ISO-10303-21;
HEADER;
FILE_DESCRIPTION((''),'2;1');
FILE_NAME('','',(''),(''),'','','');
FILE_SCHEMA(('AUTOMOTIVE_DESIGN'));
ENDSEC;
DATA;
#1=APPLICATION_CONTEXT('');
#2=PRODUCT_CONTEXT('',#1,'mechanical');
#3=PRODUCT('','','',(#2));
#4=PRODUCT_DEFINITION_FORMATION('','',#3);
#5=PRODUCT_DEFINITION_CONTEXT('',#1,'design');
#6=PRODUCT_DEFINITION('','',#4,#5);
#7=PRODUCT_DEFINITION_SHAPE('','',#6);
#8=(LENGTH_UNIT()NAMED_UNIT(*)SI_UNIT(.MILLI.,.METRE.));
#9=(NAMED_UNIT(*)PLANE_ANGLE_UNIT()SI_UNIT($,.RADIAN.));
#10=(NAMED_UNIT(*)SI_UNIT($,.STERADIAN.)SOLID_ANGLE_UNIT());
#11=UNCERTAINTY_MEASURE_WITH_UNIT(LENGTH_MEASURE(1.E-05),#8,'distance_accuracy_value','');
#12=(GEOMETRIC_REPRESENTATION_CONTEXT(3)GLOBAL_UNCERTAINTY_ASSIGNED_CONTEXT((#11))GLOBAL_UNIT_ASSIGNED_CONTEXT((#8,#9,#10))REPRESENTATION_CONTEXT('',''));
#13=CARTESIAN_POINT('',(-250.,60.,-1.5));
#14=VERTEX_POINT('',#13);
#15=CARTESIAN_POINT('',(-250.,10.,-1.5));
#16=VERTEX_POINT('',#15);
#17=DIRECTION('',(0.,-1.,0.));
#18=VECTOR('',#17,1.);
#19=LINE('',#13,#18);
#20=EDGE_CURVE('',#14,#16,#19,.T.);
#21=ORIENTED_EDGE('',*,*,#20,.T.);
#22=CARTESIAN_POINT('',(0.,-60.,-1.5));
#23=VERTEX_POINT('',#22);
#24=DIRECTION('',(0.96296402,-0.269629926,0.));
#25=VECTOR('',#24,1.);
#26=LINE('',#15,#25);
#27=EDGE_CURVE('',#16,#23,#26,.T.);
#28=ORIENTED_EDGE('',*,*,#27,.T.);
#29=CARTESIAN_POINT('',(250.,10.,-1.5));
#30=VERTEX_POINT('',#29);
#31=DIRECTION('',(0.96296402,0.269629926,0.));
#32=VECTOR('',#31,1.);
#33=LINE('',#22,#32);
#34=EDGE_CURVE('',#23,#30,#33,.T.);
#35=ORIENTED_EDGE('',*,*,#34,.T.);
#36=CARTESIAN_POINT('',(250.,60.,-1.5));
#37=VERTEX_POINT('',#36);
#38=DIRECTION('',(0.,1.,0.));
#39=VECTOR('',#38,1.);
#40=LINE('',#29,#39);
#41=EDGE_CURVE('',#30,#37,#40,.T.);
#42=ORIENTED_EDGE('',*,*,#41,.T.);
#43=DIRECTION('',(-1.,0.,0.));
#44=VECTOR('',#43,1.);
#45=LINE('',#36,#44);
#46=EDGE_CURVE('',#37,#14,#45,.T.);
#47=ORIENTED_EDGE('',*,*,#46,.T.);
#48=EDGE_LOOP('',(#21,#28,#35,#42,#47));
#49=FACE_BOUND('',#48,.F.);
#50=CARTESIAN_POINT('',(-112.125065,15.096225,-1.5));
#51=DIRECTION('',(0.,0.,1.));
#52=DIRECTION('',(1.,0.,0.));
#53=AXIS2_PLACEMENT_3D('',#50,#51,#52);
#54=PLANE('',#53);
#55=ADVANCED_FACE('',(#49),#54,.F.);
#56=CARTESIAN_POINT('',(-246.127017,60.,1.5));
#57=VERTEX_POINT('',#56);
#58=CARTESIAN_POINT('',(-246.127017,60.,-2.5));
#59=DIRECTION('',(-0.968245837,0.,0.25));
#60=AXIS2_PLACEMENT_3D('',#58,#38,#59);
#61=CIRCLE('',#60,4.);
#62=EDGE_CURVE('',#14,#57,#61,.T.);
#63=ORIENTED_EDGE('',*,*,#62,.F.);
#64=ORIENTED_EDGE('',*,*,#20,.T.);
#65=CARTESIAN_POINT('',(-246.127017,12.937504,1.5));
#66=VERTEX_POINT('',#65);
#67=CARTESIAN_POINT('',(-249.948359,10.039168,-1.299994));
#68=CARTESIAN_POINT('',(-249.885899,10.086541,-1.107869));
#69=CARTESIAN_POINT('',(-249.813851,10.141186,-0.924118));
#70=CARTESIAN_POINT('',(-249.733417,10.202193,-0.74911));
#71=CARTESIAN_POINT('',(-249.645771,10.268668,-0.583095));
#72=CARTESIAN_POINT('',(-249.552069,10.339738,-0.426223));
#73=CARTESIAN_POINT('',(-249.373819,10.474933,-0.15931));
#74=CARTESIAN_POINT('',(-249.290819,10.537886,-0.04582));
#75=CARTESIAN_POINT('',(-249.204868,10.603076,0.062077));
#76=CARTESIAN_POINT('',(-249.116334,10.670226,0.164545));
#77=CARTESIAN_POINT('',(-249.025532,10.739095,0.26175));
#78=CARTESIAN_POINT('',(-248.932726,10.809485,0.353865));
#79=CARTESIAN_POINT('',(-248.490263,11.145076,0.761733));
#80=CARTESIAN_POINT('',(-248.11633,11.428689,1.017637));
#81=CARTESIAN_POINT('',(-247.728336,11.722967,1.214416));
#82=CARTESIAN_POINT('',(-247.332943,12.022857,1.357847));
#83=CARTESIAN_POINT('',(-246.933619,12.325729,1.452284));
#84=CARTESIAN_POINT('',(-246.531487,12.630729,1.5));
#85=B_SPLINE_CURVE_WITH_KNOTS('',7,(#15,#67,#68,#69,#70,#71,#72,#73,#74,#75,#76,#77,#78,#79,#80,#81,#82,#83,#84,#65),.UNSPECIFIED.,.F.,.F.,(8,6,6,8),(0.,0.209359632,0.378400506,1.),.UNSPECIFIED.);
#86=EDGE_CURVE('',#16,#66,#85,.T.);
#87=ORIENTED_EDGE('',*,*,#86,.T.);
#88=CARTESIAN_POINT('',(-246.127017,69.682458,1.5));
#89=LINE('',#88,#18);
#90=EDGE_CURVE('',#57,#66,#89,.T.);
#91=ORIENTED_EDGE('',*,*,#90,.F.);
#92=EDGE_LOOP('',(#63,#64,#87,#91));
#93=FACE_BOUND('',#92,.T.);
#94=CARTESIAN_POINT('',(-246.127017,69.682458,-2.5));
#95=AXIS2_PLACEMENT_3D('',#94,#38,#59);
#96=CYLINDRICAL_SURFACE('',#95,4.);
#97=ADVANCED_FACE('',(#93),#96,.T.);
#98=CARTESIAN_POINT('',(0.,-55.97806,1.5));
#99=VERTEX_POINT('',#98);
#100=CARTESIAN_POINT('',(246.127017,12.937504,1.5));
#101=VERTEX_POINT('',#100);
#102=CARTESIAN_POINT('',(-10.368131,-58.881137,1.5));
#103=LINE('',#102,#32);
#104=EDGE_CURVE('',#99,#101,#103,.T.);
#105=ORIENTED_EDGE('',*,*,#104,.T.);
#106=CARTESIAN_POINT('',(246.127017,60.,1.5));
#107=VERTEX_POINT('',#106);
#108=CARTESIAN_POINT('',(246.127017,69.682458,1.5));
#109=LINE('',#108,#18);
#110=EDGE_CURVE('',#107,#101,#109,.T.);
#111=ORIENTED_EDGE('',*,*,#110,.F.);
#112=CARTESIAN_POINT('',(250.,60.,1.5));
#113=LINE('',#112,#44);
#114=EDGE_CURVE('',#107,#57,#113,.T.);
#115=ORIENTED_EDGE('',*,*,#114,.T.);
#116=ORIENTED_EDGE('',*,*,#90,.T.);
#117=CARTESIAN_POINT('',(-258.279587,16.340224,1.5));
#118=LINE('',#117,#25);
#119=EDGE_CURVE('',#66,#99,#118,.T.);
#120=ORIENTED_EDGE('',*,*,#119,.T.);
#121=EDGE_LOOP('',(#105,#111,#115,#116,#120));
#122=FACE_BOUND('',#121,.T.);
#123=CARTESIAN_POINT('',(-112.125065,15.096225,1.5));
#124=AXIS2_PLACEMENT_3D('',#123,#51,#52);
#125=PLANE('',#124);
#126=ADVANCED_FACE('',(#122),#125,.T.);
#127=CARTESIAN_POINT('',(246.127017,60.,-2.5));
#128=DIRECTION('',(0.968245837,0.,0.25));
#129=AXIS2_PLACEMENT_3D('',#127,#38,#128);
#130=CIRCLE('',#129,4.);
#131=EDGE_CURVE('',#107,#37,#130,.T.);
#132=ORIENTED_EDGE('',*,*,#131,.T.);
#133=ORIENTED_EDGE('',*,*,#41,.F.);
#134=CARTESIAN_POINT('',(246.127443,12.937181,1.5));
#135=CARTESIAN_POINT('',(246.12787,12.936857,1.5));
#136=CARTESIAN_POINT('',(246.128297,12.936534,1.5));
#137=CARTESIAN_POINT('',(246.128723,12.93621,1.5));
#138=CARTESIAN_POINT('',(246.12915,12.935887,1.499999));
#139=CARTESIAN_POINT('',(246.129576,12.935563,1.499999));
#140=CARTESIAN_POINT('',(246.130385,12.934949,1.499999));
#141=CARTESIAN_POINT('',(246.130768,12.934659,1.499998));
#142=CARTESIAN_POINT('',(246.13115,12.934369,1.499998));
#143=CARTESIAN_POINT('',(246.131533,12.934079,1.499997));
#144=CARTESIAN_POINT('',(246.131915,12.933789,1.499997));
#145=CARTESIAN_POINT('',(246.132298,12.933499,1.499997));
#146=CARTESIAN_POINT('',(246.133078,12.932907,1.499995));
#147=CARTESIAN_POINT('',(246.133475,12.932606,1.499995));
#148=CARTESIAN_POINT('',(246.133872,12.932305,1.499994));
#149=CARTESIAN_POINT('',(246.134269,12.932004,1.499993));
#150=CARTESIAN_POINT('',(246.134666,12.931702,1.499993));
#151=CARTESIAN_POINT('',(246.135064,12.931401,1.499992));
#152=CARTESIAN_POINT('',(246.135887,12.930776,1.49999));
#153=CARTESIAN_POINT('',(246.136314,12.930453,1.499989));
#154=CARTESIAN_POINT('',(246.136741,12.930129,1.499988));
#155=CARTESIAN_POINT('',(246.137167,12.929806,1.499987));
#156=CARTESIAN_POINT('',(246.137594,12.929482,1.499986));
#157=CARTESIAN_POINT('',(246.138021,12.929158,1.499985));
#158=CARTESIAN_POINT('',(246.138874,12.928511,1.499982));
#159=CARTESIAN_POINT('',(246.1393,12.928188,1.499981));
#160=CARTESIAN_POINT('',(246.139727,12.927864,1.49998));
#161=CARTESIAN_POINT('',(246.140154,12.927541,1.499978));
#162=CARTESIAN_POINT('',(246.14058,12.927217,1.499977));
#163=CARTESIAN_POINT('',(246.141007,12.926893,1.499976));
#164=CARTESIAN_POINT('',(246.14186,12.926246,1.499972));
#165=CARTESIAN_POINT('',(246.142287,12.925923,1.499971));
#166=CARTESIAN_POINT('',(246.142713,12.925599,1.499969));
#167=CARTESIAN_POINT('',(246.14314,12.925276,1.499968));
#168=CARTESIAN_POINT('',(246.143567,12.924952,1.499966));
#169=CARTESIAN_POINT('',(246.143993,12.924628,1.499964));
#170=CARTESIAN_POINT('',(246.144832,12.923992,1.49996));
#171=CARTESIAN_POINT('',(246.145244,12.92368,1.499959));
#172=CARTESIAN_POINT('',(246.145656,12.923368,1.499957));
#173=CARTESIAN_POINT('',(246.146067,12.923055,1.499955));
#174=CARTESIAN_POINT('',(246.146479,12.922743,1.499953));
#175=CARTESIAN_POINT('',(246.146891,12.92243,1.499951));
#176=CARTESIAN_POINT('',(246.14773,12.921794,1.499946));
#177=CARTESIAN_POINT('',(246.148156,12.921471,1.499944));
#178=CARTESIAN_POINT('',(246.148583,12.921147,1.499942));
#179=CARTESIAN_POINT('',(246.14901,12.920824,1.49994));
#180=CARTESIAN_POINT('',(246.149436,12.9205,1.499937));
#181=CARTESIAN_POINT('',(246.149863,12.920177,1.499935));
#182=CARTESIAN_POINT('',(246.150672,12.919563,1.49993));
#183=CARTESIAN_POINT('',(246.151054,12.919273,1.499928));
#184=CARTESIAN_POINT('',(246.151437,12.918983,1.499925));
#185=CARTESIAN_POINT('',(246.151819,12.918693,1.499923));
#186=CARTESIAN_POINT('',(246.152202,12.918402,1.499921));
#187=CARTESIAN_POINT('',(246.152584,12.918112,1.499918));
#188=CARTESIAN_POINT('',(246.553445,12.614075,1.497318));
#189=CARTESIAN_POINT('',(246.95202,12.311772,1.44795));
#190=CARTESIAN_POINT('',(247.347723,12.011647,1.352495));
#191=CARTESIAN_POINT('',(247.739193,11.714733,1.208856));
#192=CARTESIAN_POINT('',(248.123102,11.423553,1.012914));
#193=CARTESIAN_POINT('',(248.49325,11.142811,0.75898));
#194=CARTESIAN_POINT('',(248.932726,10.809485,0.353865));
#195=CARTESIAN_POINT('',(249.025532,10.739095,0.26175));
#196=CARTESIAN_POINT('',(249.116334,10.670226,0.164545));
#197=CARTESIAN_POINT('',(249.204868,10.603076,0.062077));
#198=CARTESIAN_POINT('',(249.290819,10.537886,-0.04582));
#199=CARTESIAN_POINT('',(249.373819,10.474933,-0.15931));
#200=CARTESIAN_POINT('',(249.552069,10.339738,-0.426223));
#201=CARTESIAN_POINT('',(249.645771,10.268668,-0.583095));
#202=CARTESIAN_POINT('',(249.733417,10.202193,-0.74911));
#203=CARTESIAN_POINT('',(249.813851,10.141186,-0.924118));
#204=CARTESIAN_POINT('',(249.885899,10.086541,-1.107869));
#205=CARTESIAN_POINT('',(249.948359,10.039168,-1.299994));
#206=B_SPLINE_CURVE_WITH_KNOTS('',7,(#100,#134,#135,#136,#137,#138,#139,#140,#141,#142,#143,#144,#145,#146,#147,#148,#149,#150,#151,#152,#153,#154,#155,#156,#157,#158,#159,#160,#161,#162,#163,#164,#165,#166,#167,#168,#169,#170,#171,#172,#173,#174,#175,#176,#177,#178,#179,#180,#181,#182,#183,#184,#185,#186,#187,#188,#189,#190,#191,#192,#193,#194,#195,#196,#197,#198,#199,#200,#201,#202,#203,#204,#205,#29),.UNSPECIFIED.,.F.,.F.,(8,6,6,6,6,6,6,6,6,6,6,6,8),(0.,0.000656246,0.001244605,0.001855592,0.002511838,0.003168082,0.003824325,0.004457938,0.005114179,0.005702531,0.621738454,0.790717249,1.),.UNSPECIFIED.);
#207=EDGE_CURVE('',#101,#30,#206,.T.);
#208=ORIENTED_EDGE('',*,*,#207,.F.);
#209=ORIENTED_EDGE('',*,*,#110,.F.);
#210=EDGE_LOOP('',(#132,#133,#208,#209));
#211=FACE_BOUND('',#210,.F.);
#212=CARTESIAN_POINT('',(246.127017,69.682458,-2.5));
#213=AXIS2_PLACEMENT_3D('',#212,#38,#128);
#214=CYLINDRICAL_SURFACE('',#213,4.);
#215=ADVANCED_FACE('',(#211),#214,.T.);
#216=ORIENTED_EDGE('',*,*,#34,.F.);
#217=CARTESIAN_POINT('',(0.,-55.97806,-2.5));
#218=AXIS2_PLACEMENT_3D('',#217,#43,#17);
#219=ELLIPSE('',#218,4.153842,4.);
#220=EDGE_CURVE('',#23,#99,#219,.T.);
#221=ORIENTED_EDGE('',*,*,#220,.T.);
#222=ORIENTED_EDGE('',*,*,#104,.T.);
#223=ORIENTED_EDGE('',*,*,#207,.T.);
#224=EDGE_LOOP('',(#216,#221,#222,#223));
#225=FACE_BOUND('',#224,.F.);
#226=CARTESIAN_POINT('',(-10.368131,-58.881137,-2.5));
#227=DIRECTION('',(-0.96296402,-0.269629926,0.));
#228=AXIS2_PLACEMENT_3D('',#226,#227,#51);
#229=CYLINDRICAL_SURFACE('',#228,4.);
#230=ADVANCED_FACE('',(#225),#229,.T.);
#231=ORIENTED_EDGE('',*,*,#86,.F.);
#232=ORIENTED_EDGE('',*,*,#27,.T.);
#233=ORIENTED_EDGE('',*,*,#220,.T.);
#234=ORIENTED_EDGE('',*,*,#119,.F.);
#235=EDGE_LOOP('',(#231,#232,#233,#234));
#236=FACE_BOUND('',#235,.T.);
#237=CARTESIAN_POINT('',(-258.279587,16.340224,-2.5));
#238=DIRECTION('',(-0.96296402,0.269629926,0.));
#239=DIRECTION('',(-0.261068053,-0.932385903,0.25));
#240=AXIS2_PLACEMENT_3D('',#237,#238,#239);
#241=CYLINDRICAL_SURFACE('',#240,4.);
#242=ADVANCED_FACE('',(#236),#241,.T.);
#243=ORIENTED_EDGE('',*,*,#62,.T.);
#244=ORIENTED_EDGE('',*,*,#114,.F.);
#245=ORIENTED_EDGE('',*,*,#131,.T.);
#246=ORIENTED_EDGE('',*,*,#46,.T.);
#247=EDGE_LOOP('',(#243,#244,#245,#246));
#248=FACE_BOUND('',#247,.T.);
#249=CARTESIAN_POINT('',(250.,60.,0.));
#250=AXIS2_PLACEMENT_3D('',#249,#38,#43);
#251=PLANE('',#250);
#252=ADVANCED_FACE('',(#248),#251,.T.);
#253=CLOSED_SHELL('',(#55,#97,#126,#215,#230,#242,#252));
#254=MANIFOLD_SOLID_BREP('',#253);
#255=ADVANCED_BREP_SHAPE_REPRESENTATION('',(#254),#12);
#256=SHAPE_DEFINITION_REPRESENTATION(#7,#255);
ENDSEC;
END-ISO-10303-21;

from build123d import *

# Parameters (mm, degrees)
F1_DEPTH    = 1.5
F2_T1_DEPTH = 69.364916731
F2_T3_DEPTH = 278.980016446
F2_T5_DEPTH = 278.980016446


# Not quite as in the source:
# - a fillet or chamfer that OpenCascade refuses, or shapes differently, is made with other operations: its cross-section is extruded or revolved along the edge and cut away or added


with BuildPart() as f1:
    # F0 (on Top) → F1 (new body, symmetric)
    with BuildSketch(Plane.XY):
        Polygon((-250, 10), (0, -60), (0, 60), (-250, 60), align=None)
        Polygon((0, 60), (0, -60), (250, 10), (250, 60), align=None)
    extrude(amount=F1_DEPTH, both=True)

    # F2: fillet of radius 4 on 4 edges, made by hand

    # F2_s2 → F2_t1 (cut)
    with BuildSketch(Plane.XZ.offset(-69.6824583655)):
        with BuildLine():
            ThreePointArc((250, -1.5), (248.5765063966, 0.6622776602), (246.1270166538, 1.5))
            Line((246.1270166538, 1.5), (250, 1.5))
            Line((250, 1.5), (250, -1.5))
        make_face()
        with BuildLine():
            ThreePointArc((-250, -1.5), (-248.5765063966, 0.6622776602), (-246.1270166538, 1.5))
            Line((-246.1270166538, 1.5), (-250, 1.5))
            Line((-250, 1.5), (-250, -1.5))
        make_face()
    extrude(amount=F2_T1_DEPTH, mode=Mode.SUBTRACT)

    # F2_s4 → F2_t3 (cut)
    with BuildSketch(Plane(origin=(-24.9024940432, -6.9726983321, 0), x_dir=(0, 0, 1), z_dir=(0.9629640197, 0.2696299255, 0))):
        with BuildLine():
            ThreePointArc((1.5, 53.9048578366), (0.6622776602, 56.3543475794), (-1.5, 57.7778411829))
            Line((-1.5, 57.7778411829), (1.5, 57.7778411829))
            Line((1.5, 57.7778411829), (1.5, 53.9048578366))
        make_face()
    extrude(amount=F2_T3_DEPTH, mode=Mode.SUBTRACT)

    # F2_s6 → F2_t5 (cut)
    with BuildSketch(Plane(origin=(-243.7452240135, 68.2486627238, 0), x_dir=(0, 0, 1), z_dir=(0.9629640197, -0.2696299255, 0))):
        with BuildLine():
            ThreePointArc((-1.5, 57.7778411829), (0.6622776602, 56.3543475794), (1.5, 53.9048578366))
            Line((1.5, 53.9048578366), (1.5, 57.7778411829))
            Line((1.5, 57.7778411829), (-1.5, 57.7778411829))
        make_face()
    extrude(amount=F2_T5_DEPTH, mode=Mode.SUBTRACT)


solid = f1.part
